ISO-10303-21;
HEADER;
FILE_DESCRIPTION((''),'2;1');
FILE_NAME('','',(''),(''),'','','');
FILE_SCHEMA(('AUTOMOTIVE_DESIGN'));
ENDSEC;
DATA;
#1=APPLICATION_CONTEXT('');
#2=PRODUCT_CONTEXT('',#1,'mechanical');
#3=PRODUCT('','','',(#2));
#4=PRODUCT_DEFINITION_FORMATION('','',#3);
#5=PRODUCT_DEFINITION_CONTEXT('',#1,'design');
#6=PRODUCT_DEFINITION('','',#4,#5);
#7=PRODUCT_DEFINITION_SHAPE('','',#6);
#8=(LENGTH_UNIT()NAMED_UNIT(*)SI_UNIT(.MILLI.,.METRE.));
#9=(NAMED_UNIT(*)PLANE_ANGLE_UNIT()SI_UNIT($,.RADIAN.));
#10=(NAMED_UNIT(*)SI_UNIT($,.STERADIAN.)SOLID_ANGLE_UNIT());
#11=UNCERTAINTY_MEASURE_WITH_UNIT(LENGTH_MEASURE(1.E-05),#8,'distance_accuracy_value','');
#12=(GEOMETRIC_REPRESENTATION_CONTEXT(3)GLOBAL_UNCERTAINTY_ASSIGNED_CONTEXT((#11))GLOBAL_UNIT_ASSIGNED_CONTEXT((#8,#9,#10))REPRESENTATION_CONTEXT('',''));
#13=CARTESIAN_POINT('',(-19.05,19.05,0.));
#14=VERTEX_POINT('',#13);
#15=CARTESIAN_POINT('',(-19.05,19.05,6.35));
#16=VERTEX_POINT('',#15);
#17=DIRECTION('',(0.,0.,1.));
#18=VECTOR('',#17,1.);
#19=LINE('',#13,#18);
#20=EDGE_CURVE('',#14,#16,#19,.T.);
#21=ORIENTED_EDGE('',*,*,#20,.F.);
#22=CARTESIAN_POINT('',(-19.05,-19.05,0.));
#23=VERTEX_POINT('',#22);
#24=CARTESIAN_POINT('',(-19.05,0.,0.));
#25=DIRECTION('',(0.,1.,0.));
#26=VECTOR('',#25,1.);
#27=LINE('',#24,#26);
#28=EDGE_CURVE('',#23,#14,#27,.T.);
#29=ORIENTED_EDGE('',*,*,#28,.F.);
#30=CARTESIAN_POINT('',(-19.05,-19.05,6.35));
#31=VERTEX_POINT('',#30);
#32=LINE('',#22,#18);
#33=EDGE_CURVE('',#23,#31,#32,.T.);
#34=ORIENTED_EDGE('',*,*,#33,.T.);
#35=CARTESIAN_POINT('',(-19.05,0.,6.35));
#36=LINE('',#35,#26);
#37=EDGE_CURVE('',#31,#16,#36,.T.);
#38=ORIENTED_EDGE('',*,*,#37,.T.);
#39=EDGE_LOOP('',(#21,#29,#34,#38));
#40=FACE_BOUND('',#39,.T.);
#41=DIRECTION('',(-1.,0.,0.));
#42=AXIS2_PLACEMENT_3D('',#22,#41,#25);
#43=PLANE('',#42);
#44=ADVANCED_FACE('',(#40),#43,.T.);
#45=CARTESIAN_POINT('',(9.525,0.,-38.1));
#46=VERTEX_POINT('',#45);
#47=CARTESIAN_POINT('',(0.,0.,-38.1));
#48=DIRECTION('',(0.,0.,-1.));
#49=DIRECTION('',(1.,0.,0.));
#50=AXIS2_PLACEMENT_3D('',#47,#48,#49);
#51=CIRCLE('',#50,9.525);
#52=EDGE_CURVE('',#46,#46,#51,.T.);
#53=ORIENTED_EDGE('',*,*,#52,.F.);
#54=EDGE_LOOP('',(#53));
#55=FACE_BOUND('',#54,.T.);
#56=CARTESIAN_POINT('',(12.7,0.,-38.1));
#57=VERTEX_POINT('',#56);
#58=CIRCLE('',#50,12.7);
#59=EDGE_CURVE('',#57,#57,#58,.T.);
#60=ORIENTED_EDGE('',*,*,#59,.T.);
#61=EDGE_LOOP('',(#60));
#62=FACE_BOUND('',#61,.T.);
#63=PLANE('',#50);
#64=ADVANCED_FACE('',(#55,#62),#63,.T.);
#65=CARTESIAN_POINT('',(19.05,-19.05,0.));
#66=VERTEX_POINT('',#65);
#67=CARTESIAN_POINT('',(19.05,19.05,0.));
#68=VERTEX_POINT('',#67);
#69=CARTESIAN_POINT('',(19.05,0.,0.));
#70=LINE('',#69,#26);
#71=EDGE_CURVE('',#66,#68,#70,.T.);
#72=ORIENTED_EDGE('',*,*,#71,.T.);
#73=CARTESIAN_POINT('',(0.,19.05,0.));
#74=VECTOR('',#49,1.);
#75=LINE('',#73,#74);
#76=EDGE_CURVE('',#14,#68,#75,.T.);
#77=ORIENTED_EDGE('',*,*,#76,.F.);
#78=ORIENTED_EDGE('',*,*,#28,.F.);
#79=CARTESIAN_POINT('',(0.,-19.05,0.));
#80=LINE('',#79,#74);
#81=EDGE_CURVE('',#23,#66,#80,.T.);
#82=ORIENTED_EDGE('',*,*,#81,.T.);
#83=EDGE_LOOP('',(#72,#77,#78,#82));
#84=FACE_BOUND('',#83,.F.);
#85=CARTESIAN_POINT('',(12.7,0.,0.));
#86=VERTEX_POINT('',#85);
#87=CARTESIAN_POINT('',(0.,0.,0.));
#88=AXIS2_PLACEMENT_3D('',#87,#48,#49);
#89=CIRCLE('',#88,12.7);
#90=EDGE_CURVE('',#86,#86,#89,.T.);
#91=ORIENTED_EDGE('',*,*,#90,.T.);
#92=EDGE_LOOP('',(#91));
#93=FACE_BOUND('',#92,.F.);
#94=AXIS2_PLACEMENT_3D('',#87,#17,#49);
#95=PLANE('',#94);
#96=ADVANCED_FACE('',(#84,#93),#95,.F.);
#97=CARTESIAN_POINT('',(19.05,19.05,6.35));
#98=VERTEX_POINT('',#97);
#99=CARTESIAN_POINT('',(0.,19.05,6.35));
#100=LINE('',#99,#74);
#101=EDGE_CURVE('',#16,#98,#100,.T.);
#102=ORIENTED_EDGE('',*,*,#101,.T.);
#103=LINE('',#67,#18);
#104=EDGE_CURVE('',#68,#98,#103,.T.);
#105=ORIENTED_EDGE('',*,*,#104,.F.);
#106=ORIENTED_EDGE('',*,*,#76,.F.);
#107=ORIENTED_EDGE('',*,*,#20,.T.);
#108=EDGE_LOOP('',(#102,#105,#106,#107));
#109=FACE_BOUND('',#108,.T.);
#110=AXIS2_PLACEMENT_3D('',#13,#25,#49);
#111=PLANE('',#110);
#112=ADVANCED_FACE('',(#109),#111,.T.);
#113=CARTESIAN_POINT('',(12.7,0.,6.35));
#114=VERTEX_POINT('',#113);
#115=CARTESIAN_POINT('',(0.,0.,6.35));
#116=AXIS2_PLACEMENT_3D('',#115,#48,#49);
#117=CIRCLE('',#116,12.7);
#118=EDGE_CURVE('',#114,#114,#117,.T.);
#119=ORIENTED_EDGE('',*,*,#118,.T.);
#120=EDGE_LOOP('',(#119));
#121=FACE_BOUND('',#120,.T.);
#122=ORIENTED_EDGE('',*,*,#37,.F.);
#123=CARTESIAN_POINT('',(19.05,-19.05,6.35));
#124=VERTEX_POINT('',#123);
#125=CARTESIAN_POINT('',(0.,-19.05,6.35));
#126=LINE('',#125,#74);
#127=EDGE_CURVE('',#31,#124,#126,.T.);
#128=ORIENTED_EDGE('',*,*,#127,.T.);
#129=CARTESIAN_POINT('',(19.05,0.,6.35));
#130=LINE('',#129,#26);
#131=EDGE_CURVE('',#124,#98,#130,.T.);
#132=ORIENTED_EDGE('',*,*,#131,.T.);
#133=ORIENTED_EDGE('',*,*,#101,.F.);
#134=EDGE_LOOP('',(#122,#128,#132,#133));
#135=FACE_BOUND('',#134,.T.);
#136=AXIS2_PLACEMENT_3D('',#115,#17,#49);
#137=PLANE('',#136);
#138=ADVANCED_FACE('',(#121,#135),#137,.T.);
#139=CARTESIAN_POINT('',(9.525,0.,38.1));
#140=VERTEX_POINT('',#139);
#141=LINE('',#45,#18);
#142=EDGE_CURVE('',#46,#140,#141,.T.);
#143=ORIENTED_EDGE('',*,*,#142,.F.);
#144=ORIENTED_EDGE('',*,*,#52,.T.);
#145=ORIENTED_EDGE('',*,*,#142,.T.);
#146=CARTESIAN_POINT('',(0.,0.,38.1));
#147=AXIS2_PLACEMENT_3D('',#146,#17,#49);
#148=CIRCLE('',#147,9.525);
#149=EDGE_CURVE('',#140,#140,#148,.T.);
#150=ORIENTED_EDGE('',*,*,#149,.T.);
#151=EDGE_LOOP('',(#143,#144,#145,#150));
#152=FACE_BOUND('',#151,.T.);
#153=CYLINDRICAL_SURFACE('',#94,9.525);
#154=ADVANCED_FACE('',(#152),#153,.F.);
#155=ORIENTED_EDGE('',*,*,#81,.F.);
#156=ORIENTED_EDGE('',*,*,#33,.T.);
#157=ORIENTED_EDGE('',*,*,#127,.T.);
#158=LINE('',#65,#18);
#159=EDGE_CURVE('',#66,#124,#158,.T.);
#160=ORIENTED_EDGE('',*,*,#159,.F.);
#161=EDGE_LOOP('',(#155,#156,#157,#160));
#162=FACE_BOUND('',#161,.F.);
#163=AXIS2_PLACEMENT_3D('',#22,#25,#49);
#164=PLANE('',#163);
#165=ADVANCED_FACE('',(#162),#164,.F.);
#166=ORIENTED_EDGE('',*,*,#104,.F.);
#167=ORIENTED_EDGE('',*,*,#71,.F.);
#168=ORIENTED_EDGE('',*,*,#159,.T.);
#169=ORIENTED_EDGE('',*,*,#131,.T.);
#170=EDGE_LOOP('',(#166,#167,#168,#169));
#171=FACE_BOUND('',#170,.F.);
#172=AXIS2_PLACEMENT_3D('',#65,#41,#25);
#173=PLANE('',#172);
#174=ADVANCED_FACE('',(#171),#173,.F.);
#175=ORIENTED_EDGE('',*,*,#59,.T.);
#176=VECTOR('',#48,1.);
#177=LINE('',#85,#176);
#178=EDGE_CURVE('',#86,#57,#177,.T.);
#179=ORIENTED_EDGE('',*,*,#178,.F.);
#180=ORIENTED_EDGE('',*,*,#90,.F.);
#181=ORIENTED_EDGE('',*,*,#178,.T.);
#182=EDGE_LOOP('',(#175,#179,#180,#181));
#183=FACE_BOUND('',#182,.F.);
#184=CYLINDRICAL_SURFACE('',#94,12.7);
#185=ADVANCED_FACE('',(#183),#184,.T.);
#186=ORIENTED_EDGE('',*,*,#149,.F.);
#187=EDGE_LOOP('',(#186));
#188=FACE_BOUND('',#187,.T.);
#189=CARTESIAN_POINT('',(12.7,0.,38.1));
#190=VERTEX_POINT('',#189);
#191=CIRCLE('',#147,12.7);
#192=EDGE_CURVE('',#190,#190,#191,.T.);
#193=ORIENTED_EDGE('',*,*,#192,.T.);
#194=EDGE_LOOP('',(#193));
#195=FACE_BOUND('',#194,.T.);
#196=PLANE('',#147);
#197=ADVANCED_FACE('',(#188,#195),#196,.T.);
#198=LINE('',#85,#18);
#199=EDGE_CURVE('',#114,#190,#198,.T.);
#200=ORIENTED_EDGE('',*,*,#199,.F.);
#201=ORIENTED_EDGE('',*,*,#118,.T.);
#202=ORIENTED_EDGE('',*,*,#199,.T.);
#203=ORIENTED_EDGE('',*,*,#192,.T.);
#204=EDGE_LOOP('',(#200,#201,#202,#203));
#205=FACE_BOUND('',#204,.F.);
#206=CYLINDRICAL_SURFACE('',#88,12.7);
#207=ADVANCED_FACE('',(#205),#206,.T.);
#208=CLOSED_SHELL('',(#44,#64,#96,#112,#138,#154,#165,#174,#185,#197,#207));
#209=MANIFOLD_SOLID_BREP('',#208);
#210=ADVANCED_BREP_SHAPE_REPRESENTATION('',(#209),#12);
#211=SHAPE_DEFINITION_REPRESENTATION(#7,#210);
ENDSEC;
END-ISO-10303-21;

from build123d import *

# Parameters (mm, degrees)
F0_R     = 12.7
F0_R_2   = 9.525
F1_DEPTH = 38.1
F2_W     = 38.1
F2_H     = 38.1
F2_R     = 9.525
F3_DEPTH = 6.35
F4_R     = 12.7
F4_R_2   = 9.525
F5_DEPTH = 38.1


with BuildPart() as f1:
    # F0 (on Top) → F1 (new body)
    with BuildSketch(Plane.XY):
        Circle(F0_R)
        Circle(F0_R_2, mode=Mode.SUBTRACT)
    extrude(amount=F1_DEPTH)

    # F2 (on Top) → F3 (join)
    with BuildSketch(Plane.XY):
        Rectangle(F2_W, F2_H)
        Circle(F2_R, mode=Mode.SUBTRACT)
    extrude(amount=F3_DEPTH)

    # F4 (on face) → F5 (join)
    with BuildSketch(Plane(origin=(0, 0, 0), x_dir=(1, 0, 0), z_dir=(0, 0, -1))):
        Circle(F4_R)
        Circle(F4_R_2, mode=Mode.SUBTRACT)
    extrude(amount=F5_DEPTH)


solid = f1.part
